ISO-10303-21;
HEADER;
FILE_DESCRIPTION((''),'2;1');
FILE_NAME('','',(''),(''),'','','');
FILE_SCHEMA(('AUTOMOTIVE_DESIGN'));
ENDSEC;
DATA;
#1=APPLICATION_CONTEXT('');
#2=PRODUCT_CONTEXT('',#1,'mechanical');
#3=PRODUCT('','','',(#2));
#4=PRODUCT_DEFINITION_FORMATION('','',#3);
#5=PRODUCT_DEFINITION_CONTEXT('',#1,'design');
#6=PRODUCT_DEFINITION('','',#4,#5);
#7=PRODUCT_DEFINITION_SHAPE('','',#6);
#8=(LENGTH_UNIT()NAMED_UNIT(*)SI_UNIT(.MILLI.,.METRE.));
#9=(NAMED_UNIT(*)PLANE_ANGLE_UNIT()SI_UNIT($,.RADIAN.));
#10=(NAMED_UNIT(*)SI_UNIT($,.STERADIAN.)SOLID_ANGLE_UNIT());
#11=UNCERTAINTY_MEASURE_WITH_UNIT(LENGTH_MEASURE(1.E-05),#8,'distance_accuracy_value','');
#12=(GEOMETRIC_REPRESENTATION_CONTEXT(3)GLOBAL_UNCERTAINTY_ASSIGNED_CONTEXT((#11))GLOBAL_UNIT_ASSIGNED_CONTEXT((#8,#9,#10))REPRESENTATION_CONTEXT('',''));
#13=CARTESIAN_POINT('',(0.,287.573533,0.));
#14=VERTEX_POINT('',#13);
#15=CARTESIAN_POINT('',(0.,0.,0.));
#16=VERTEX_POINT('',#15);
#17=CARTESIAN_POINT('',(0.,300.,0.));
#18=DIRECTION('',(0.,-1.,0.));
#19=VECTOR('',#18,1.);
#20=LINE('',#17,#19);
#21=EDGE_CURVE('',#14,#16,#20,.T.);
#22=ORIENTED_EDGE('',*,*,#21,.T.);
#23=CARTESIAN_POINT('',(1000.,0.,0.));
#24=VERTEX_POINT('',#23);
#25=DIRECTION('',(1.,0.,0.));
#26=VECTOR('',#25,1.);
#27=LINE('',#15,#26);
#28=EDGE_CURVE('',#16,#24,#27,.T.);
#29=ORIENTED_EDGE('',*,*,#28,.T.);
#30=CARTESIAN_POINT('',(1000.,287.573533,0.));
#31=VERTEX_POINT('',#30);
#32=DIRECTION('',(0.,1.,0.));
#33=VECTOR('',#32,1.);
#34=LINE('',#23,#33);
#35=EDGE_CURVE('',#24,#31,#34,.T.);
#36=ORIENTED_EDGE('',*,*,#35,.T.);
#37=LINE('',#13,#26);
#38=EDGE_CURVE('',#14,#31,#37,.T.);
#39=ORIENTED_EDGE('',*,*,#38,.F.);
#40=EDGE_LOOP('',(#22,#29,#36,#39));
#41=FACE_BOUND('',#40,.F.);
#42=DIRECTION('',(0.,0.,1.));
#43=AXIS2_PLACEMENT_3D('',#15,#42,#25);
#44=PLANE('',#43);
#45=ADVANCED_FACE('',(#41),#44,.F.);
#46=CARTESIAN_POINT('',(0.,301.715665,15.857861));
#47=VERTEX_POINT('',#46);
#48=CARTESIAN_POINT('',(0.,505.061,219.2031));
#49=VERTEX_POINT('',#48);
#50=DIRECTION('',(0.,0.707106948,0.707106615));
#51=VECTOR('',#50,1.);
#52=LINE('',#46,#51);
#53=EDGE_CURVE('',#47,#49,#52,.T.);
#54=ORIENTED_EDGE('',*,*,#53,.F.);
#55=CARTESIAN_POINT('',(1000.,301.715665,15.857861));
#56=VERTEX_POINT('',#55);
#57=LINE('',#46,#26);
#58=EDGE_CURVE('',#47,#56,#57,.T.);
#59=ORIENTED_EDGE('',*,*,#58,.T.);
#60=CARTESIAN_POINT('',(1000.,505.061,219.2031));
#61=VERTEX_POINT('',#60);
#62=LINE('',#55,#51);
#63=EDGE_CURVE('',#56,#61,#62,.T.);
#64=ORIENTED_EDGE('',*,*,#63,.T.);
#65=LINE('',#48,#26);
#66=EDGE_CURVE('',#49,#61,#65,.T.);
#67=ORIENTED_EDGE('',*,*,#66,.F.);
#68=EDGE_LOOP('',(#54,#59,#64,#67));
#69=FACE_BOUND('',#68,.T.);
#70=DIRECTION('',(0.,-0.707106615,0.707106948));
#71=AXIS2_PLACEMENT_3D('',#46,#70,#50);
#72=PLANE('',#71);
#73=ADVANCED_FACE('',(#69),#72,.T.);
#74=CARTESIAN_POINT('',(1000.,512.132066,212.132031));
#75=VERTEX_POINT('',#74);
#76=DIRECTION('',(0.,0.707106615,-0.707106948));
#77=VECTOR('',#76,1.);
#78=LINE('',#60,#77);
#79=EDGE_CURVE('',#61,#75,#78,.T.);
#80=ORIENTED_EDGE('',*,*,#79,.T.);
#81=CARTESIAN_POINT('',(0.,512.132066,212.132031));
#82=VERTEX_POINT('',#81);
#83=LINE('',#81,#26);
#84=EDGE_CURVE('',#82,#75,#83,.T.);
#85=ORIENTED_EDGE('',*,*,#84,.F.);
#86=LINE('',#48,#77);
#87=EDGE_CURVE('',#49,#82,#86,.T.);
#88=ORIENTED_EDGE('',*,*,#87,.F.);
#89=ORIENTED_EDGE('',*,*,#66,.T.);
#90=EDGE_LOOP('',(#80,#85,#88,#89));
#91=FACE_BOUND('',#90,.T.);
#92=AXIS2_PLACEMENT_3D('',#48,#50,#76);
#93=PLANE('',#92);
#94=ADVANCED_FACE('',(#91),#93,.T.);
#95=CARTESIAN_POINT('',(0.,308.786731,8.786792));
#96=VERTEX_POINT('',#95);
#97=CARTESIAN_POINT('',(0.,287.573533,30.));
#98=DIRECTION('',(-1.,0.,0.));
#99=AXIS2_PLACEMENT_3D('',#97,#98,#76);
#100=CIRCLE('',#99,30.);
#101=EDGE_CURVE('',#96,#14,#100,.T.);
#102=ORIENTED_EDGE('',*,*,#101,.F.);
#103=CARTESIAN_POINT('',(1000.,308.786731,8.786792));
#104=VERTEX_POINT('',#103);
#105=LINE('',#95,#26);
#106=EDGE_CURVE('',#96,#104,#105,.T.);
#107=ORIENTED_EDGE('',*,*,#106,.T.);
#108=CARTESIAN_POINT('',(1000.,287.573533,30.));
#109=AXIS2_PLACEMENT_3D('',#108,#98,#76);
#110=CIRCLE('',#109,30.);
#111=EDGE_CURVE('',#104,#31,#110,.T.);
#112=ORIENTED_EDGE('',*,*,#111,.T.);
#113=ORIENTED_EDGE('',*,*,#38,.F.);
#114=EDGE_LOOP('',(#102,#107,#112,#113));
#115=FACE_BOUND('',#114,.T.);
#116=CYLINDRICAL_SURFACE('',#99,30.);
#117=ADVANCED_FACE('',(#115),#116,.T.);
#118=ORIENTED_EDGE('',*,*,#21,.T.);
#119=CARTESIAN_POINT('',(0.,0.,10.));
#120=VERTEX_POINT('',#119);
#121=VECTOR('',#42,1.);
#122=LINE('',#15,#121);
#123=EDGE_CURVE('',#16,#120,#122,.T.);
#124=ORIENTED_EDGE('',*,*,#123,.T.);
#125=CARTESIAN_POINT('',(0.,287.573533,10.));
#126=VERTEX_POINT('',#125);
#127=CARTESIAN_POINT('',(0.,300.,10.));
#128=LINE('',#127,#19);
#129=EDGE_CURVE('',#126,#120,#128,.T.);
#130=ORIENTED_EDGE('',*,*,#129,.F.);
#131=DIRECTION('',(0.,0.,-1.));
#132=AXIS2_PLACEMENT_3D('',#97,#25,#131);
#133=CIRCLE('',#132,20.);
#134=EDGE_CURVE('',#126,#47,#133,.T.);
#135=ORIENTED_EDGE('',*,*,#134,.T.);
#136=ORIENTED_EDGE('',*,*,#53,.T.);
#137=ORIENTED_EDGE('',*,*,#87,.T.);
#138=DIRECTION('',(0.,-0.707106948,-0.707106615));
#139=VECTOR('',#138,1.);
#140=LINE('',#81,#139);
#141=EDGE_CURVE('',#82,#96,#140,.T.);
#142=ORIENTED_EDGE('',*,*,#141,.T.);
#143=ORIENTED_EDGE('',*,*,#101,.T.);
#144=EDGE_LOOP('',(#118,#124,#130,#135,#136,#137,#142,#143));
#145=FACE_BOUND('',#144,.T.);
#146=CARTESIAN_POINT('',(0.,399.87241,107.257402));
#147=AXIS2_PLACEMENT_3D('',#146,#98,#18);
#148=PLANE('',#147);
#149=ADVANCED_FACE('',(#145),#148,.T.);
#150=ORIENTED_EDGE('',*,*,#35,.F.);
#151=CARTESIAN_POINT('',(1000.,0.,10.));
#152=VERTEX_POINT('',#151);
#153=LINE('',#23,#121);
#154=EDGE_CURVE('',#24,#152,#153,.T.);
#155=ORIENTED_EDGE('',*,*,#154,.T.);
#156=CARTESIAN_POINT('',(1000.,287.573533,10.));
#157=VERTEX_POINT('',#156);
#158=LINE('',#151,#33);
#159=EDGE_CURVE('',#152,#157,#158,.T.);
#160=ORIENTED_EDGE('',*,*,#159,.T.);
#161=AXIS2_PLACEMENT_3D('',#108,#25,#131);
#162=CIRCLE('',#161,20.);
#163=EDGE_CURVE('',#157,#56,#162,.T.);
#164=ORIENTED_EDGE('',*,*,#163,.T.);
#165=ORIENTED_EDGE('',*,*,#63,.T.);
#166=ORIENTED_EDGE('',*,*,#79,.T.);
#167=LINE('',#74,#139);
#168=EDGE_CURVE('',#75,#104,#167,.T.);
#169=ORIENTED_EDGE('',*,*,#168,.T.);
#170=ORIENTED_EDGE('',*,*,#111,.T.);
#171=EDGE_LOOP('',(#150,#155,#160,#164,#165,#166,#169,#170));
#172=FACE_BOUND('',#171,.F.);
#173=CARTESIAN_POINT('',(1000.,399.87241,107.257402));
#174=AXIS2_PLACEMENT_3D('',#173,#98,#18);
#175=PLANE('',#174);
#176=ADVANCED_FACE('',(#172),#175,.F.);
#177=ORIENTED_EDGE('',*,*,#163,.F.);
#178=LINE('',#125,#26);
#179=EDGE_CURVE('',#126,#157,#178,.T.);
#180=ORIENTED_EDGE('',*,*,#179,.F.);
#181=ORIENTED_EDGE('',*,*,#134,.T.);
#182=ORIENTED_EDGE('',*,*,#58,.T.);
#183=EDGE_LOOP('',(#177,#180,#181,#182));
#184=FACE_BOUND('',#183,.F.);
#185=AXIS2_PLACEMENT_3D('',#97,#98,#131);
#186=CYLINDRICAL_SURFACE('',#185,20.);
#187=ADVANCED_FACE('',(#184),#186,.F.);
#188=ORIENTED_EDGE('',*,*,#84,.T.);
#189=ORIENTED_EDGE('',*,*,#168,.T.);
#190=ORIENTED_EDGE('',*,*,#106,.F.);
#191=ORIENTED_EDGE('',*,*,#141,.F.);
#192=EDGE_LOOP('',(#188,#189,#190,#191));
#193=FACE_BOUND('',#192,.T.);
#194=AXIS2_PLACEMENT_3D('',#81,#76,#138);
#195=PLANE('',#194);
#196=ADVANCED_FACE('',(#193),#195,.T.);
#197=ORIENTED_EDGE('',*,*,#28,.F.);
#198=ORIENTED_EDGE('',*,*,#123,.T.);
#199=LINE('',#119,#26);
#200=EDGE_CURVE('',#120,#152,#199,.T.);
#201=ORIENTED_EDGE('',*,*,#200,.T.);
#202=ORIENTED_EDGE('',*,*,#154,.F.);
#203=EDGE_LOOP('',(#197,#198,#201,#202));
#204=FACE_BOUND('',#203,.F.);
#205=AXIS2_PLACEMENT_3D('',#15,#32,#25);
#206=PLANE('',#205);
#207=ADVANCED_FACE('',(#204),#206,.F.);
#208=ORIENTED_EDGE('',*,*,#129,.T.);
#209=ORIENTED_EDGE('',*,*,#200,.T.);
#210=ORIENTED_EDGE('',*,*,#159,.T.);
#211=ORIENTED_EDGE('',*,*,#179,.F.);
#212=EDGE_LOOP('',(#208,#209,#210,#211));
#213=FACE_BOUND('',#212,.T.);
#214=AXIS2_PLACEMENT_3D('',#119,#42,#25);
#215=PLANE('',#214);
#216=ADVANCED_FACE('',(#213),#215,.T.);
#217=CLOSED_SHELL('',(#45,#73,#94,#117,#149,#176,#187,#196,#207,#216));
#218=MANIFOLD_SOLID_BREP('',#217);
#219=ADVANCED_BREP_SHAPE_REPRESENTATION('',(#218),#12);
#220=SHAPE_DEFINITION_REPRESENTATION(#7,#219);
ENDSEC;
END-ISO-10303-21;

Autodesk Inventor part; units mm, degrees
ref_plane "YZ Plane" through (0, 0, 0) normal (1, 0, 0) x (0, 1, 0)
ref_plane "XZ Plane" through (0, 0, 0) normal (0, 1, 0) x (-1, 0, 0)
ref_plane "XY Plane" through (0, 0, 0) normal (0, 0, 1) x (1, 0, 0)
sketch "Sketch1" plane through (0, 0, 0) normal (0, 0, 1) x (1, 0, 0)
  line L0 (0, 0) -> (1000, 0)
  line L1 (1000, 0) -> (1000, 300)
  line L2 (1000, 300) -> (0, 300)
  line L3 (0, 300) -> (0, 0)
  dimension "d0" = 1000
  dimension "d1" = 300
extrude "Plate1" add sketch "Sketch1" along normal blind 10
sketch "Sketch2" plane through (0, 292.9289, 7.0711) normal (0, 0.7071068, -0.7071068) x (-1, 0, 0)
  line L0 (-1000, 0) -> (0, 0)
  line L1 (0, 0) -> (0, 300)
  line L2 (0, 300) -> (-1000, 300)
  line L3 (-1000, 300) -> (-1000, 0)
edge flange "Flange1" height 300 angle 45 thickness 10 bend radius 20 thickness toward (0, 0.7071068, -0.7071068) relief tear relief width 10 relief depth 5 edges at (500, 300, 10) wall of the first edge with corners at (1000, 292.9289, 7.0711) (0, 292.9289, 7.0711) (0, 505.061, 219.2031) (1000, 505.061, 219.2031)
bend "Bend1"
corner "Corner1"
equation "\"d2\" = Thickness"
equation "\"d3\" = BendReliefWidth"
equation "\"d4\" = BendReliefDepth"
equation "\"d5\" = MinimumRemnant"
equation "\"d6\" = TransitionRadius"
equation "\"d10\" = CornerReliefSize"
equation "\"d11\" = GapSize"
equation "\"d12\" = JacobiRadiusSize"
equation "\"BendReliefDepth\" = 0.5 * Thickness"
equation "\"Thickness\" = 10"
equation "\"BendReliefWidth\" = 10"
equation "\"MinimumRemnant\" = 20"
equation "\"TransitionRadius\" = 10"
equation "\"CornerReliefSize\" = 40"
equation "\"GapSize\" = 10"
equation "\"JacobiRadiusSize\" = 10"
properties part number "10mm Polycarb Sheet" material "Polycarbonate, Clear"
